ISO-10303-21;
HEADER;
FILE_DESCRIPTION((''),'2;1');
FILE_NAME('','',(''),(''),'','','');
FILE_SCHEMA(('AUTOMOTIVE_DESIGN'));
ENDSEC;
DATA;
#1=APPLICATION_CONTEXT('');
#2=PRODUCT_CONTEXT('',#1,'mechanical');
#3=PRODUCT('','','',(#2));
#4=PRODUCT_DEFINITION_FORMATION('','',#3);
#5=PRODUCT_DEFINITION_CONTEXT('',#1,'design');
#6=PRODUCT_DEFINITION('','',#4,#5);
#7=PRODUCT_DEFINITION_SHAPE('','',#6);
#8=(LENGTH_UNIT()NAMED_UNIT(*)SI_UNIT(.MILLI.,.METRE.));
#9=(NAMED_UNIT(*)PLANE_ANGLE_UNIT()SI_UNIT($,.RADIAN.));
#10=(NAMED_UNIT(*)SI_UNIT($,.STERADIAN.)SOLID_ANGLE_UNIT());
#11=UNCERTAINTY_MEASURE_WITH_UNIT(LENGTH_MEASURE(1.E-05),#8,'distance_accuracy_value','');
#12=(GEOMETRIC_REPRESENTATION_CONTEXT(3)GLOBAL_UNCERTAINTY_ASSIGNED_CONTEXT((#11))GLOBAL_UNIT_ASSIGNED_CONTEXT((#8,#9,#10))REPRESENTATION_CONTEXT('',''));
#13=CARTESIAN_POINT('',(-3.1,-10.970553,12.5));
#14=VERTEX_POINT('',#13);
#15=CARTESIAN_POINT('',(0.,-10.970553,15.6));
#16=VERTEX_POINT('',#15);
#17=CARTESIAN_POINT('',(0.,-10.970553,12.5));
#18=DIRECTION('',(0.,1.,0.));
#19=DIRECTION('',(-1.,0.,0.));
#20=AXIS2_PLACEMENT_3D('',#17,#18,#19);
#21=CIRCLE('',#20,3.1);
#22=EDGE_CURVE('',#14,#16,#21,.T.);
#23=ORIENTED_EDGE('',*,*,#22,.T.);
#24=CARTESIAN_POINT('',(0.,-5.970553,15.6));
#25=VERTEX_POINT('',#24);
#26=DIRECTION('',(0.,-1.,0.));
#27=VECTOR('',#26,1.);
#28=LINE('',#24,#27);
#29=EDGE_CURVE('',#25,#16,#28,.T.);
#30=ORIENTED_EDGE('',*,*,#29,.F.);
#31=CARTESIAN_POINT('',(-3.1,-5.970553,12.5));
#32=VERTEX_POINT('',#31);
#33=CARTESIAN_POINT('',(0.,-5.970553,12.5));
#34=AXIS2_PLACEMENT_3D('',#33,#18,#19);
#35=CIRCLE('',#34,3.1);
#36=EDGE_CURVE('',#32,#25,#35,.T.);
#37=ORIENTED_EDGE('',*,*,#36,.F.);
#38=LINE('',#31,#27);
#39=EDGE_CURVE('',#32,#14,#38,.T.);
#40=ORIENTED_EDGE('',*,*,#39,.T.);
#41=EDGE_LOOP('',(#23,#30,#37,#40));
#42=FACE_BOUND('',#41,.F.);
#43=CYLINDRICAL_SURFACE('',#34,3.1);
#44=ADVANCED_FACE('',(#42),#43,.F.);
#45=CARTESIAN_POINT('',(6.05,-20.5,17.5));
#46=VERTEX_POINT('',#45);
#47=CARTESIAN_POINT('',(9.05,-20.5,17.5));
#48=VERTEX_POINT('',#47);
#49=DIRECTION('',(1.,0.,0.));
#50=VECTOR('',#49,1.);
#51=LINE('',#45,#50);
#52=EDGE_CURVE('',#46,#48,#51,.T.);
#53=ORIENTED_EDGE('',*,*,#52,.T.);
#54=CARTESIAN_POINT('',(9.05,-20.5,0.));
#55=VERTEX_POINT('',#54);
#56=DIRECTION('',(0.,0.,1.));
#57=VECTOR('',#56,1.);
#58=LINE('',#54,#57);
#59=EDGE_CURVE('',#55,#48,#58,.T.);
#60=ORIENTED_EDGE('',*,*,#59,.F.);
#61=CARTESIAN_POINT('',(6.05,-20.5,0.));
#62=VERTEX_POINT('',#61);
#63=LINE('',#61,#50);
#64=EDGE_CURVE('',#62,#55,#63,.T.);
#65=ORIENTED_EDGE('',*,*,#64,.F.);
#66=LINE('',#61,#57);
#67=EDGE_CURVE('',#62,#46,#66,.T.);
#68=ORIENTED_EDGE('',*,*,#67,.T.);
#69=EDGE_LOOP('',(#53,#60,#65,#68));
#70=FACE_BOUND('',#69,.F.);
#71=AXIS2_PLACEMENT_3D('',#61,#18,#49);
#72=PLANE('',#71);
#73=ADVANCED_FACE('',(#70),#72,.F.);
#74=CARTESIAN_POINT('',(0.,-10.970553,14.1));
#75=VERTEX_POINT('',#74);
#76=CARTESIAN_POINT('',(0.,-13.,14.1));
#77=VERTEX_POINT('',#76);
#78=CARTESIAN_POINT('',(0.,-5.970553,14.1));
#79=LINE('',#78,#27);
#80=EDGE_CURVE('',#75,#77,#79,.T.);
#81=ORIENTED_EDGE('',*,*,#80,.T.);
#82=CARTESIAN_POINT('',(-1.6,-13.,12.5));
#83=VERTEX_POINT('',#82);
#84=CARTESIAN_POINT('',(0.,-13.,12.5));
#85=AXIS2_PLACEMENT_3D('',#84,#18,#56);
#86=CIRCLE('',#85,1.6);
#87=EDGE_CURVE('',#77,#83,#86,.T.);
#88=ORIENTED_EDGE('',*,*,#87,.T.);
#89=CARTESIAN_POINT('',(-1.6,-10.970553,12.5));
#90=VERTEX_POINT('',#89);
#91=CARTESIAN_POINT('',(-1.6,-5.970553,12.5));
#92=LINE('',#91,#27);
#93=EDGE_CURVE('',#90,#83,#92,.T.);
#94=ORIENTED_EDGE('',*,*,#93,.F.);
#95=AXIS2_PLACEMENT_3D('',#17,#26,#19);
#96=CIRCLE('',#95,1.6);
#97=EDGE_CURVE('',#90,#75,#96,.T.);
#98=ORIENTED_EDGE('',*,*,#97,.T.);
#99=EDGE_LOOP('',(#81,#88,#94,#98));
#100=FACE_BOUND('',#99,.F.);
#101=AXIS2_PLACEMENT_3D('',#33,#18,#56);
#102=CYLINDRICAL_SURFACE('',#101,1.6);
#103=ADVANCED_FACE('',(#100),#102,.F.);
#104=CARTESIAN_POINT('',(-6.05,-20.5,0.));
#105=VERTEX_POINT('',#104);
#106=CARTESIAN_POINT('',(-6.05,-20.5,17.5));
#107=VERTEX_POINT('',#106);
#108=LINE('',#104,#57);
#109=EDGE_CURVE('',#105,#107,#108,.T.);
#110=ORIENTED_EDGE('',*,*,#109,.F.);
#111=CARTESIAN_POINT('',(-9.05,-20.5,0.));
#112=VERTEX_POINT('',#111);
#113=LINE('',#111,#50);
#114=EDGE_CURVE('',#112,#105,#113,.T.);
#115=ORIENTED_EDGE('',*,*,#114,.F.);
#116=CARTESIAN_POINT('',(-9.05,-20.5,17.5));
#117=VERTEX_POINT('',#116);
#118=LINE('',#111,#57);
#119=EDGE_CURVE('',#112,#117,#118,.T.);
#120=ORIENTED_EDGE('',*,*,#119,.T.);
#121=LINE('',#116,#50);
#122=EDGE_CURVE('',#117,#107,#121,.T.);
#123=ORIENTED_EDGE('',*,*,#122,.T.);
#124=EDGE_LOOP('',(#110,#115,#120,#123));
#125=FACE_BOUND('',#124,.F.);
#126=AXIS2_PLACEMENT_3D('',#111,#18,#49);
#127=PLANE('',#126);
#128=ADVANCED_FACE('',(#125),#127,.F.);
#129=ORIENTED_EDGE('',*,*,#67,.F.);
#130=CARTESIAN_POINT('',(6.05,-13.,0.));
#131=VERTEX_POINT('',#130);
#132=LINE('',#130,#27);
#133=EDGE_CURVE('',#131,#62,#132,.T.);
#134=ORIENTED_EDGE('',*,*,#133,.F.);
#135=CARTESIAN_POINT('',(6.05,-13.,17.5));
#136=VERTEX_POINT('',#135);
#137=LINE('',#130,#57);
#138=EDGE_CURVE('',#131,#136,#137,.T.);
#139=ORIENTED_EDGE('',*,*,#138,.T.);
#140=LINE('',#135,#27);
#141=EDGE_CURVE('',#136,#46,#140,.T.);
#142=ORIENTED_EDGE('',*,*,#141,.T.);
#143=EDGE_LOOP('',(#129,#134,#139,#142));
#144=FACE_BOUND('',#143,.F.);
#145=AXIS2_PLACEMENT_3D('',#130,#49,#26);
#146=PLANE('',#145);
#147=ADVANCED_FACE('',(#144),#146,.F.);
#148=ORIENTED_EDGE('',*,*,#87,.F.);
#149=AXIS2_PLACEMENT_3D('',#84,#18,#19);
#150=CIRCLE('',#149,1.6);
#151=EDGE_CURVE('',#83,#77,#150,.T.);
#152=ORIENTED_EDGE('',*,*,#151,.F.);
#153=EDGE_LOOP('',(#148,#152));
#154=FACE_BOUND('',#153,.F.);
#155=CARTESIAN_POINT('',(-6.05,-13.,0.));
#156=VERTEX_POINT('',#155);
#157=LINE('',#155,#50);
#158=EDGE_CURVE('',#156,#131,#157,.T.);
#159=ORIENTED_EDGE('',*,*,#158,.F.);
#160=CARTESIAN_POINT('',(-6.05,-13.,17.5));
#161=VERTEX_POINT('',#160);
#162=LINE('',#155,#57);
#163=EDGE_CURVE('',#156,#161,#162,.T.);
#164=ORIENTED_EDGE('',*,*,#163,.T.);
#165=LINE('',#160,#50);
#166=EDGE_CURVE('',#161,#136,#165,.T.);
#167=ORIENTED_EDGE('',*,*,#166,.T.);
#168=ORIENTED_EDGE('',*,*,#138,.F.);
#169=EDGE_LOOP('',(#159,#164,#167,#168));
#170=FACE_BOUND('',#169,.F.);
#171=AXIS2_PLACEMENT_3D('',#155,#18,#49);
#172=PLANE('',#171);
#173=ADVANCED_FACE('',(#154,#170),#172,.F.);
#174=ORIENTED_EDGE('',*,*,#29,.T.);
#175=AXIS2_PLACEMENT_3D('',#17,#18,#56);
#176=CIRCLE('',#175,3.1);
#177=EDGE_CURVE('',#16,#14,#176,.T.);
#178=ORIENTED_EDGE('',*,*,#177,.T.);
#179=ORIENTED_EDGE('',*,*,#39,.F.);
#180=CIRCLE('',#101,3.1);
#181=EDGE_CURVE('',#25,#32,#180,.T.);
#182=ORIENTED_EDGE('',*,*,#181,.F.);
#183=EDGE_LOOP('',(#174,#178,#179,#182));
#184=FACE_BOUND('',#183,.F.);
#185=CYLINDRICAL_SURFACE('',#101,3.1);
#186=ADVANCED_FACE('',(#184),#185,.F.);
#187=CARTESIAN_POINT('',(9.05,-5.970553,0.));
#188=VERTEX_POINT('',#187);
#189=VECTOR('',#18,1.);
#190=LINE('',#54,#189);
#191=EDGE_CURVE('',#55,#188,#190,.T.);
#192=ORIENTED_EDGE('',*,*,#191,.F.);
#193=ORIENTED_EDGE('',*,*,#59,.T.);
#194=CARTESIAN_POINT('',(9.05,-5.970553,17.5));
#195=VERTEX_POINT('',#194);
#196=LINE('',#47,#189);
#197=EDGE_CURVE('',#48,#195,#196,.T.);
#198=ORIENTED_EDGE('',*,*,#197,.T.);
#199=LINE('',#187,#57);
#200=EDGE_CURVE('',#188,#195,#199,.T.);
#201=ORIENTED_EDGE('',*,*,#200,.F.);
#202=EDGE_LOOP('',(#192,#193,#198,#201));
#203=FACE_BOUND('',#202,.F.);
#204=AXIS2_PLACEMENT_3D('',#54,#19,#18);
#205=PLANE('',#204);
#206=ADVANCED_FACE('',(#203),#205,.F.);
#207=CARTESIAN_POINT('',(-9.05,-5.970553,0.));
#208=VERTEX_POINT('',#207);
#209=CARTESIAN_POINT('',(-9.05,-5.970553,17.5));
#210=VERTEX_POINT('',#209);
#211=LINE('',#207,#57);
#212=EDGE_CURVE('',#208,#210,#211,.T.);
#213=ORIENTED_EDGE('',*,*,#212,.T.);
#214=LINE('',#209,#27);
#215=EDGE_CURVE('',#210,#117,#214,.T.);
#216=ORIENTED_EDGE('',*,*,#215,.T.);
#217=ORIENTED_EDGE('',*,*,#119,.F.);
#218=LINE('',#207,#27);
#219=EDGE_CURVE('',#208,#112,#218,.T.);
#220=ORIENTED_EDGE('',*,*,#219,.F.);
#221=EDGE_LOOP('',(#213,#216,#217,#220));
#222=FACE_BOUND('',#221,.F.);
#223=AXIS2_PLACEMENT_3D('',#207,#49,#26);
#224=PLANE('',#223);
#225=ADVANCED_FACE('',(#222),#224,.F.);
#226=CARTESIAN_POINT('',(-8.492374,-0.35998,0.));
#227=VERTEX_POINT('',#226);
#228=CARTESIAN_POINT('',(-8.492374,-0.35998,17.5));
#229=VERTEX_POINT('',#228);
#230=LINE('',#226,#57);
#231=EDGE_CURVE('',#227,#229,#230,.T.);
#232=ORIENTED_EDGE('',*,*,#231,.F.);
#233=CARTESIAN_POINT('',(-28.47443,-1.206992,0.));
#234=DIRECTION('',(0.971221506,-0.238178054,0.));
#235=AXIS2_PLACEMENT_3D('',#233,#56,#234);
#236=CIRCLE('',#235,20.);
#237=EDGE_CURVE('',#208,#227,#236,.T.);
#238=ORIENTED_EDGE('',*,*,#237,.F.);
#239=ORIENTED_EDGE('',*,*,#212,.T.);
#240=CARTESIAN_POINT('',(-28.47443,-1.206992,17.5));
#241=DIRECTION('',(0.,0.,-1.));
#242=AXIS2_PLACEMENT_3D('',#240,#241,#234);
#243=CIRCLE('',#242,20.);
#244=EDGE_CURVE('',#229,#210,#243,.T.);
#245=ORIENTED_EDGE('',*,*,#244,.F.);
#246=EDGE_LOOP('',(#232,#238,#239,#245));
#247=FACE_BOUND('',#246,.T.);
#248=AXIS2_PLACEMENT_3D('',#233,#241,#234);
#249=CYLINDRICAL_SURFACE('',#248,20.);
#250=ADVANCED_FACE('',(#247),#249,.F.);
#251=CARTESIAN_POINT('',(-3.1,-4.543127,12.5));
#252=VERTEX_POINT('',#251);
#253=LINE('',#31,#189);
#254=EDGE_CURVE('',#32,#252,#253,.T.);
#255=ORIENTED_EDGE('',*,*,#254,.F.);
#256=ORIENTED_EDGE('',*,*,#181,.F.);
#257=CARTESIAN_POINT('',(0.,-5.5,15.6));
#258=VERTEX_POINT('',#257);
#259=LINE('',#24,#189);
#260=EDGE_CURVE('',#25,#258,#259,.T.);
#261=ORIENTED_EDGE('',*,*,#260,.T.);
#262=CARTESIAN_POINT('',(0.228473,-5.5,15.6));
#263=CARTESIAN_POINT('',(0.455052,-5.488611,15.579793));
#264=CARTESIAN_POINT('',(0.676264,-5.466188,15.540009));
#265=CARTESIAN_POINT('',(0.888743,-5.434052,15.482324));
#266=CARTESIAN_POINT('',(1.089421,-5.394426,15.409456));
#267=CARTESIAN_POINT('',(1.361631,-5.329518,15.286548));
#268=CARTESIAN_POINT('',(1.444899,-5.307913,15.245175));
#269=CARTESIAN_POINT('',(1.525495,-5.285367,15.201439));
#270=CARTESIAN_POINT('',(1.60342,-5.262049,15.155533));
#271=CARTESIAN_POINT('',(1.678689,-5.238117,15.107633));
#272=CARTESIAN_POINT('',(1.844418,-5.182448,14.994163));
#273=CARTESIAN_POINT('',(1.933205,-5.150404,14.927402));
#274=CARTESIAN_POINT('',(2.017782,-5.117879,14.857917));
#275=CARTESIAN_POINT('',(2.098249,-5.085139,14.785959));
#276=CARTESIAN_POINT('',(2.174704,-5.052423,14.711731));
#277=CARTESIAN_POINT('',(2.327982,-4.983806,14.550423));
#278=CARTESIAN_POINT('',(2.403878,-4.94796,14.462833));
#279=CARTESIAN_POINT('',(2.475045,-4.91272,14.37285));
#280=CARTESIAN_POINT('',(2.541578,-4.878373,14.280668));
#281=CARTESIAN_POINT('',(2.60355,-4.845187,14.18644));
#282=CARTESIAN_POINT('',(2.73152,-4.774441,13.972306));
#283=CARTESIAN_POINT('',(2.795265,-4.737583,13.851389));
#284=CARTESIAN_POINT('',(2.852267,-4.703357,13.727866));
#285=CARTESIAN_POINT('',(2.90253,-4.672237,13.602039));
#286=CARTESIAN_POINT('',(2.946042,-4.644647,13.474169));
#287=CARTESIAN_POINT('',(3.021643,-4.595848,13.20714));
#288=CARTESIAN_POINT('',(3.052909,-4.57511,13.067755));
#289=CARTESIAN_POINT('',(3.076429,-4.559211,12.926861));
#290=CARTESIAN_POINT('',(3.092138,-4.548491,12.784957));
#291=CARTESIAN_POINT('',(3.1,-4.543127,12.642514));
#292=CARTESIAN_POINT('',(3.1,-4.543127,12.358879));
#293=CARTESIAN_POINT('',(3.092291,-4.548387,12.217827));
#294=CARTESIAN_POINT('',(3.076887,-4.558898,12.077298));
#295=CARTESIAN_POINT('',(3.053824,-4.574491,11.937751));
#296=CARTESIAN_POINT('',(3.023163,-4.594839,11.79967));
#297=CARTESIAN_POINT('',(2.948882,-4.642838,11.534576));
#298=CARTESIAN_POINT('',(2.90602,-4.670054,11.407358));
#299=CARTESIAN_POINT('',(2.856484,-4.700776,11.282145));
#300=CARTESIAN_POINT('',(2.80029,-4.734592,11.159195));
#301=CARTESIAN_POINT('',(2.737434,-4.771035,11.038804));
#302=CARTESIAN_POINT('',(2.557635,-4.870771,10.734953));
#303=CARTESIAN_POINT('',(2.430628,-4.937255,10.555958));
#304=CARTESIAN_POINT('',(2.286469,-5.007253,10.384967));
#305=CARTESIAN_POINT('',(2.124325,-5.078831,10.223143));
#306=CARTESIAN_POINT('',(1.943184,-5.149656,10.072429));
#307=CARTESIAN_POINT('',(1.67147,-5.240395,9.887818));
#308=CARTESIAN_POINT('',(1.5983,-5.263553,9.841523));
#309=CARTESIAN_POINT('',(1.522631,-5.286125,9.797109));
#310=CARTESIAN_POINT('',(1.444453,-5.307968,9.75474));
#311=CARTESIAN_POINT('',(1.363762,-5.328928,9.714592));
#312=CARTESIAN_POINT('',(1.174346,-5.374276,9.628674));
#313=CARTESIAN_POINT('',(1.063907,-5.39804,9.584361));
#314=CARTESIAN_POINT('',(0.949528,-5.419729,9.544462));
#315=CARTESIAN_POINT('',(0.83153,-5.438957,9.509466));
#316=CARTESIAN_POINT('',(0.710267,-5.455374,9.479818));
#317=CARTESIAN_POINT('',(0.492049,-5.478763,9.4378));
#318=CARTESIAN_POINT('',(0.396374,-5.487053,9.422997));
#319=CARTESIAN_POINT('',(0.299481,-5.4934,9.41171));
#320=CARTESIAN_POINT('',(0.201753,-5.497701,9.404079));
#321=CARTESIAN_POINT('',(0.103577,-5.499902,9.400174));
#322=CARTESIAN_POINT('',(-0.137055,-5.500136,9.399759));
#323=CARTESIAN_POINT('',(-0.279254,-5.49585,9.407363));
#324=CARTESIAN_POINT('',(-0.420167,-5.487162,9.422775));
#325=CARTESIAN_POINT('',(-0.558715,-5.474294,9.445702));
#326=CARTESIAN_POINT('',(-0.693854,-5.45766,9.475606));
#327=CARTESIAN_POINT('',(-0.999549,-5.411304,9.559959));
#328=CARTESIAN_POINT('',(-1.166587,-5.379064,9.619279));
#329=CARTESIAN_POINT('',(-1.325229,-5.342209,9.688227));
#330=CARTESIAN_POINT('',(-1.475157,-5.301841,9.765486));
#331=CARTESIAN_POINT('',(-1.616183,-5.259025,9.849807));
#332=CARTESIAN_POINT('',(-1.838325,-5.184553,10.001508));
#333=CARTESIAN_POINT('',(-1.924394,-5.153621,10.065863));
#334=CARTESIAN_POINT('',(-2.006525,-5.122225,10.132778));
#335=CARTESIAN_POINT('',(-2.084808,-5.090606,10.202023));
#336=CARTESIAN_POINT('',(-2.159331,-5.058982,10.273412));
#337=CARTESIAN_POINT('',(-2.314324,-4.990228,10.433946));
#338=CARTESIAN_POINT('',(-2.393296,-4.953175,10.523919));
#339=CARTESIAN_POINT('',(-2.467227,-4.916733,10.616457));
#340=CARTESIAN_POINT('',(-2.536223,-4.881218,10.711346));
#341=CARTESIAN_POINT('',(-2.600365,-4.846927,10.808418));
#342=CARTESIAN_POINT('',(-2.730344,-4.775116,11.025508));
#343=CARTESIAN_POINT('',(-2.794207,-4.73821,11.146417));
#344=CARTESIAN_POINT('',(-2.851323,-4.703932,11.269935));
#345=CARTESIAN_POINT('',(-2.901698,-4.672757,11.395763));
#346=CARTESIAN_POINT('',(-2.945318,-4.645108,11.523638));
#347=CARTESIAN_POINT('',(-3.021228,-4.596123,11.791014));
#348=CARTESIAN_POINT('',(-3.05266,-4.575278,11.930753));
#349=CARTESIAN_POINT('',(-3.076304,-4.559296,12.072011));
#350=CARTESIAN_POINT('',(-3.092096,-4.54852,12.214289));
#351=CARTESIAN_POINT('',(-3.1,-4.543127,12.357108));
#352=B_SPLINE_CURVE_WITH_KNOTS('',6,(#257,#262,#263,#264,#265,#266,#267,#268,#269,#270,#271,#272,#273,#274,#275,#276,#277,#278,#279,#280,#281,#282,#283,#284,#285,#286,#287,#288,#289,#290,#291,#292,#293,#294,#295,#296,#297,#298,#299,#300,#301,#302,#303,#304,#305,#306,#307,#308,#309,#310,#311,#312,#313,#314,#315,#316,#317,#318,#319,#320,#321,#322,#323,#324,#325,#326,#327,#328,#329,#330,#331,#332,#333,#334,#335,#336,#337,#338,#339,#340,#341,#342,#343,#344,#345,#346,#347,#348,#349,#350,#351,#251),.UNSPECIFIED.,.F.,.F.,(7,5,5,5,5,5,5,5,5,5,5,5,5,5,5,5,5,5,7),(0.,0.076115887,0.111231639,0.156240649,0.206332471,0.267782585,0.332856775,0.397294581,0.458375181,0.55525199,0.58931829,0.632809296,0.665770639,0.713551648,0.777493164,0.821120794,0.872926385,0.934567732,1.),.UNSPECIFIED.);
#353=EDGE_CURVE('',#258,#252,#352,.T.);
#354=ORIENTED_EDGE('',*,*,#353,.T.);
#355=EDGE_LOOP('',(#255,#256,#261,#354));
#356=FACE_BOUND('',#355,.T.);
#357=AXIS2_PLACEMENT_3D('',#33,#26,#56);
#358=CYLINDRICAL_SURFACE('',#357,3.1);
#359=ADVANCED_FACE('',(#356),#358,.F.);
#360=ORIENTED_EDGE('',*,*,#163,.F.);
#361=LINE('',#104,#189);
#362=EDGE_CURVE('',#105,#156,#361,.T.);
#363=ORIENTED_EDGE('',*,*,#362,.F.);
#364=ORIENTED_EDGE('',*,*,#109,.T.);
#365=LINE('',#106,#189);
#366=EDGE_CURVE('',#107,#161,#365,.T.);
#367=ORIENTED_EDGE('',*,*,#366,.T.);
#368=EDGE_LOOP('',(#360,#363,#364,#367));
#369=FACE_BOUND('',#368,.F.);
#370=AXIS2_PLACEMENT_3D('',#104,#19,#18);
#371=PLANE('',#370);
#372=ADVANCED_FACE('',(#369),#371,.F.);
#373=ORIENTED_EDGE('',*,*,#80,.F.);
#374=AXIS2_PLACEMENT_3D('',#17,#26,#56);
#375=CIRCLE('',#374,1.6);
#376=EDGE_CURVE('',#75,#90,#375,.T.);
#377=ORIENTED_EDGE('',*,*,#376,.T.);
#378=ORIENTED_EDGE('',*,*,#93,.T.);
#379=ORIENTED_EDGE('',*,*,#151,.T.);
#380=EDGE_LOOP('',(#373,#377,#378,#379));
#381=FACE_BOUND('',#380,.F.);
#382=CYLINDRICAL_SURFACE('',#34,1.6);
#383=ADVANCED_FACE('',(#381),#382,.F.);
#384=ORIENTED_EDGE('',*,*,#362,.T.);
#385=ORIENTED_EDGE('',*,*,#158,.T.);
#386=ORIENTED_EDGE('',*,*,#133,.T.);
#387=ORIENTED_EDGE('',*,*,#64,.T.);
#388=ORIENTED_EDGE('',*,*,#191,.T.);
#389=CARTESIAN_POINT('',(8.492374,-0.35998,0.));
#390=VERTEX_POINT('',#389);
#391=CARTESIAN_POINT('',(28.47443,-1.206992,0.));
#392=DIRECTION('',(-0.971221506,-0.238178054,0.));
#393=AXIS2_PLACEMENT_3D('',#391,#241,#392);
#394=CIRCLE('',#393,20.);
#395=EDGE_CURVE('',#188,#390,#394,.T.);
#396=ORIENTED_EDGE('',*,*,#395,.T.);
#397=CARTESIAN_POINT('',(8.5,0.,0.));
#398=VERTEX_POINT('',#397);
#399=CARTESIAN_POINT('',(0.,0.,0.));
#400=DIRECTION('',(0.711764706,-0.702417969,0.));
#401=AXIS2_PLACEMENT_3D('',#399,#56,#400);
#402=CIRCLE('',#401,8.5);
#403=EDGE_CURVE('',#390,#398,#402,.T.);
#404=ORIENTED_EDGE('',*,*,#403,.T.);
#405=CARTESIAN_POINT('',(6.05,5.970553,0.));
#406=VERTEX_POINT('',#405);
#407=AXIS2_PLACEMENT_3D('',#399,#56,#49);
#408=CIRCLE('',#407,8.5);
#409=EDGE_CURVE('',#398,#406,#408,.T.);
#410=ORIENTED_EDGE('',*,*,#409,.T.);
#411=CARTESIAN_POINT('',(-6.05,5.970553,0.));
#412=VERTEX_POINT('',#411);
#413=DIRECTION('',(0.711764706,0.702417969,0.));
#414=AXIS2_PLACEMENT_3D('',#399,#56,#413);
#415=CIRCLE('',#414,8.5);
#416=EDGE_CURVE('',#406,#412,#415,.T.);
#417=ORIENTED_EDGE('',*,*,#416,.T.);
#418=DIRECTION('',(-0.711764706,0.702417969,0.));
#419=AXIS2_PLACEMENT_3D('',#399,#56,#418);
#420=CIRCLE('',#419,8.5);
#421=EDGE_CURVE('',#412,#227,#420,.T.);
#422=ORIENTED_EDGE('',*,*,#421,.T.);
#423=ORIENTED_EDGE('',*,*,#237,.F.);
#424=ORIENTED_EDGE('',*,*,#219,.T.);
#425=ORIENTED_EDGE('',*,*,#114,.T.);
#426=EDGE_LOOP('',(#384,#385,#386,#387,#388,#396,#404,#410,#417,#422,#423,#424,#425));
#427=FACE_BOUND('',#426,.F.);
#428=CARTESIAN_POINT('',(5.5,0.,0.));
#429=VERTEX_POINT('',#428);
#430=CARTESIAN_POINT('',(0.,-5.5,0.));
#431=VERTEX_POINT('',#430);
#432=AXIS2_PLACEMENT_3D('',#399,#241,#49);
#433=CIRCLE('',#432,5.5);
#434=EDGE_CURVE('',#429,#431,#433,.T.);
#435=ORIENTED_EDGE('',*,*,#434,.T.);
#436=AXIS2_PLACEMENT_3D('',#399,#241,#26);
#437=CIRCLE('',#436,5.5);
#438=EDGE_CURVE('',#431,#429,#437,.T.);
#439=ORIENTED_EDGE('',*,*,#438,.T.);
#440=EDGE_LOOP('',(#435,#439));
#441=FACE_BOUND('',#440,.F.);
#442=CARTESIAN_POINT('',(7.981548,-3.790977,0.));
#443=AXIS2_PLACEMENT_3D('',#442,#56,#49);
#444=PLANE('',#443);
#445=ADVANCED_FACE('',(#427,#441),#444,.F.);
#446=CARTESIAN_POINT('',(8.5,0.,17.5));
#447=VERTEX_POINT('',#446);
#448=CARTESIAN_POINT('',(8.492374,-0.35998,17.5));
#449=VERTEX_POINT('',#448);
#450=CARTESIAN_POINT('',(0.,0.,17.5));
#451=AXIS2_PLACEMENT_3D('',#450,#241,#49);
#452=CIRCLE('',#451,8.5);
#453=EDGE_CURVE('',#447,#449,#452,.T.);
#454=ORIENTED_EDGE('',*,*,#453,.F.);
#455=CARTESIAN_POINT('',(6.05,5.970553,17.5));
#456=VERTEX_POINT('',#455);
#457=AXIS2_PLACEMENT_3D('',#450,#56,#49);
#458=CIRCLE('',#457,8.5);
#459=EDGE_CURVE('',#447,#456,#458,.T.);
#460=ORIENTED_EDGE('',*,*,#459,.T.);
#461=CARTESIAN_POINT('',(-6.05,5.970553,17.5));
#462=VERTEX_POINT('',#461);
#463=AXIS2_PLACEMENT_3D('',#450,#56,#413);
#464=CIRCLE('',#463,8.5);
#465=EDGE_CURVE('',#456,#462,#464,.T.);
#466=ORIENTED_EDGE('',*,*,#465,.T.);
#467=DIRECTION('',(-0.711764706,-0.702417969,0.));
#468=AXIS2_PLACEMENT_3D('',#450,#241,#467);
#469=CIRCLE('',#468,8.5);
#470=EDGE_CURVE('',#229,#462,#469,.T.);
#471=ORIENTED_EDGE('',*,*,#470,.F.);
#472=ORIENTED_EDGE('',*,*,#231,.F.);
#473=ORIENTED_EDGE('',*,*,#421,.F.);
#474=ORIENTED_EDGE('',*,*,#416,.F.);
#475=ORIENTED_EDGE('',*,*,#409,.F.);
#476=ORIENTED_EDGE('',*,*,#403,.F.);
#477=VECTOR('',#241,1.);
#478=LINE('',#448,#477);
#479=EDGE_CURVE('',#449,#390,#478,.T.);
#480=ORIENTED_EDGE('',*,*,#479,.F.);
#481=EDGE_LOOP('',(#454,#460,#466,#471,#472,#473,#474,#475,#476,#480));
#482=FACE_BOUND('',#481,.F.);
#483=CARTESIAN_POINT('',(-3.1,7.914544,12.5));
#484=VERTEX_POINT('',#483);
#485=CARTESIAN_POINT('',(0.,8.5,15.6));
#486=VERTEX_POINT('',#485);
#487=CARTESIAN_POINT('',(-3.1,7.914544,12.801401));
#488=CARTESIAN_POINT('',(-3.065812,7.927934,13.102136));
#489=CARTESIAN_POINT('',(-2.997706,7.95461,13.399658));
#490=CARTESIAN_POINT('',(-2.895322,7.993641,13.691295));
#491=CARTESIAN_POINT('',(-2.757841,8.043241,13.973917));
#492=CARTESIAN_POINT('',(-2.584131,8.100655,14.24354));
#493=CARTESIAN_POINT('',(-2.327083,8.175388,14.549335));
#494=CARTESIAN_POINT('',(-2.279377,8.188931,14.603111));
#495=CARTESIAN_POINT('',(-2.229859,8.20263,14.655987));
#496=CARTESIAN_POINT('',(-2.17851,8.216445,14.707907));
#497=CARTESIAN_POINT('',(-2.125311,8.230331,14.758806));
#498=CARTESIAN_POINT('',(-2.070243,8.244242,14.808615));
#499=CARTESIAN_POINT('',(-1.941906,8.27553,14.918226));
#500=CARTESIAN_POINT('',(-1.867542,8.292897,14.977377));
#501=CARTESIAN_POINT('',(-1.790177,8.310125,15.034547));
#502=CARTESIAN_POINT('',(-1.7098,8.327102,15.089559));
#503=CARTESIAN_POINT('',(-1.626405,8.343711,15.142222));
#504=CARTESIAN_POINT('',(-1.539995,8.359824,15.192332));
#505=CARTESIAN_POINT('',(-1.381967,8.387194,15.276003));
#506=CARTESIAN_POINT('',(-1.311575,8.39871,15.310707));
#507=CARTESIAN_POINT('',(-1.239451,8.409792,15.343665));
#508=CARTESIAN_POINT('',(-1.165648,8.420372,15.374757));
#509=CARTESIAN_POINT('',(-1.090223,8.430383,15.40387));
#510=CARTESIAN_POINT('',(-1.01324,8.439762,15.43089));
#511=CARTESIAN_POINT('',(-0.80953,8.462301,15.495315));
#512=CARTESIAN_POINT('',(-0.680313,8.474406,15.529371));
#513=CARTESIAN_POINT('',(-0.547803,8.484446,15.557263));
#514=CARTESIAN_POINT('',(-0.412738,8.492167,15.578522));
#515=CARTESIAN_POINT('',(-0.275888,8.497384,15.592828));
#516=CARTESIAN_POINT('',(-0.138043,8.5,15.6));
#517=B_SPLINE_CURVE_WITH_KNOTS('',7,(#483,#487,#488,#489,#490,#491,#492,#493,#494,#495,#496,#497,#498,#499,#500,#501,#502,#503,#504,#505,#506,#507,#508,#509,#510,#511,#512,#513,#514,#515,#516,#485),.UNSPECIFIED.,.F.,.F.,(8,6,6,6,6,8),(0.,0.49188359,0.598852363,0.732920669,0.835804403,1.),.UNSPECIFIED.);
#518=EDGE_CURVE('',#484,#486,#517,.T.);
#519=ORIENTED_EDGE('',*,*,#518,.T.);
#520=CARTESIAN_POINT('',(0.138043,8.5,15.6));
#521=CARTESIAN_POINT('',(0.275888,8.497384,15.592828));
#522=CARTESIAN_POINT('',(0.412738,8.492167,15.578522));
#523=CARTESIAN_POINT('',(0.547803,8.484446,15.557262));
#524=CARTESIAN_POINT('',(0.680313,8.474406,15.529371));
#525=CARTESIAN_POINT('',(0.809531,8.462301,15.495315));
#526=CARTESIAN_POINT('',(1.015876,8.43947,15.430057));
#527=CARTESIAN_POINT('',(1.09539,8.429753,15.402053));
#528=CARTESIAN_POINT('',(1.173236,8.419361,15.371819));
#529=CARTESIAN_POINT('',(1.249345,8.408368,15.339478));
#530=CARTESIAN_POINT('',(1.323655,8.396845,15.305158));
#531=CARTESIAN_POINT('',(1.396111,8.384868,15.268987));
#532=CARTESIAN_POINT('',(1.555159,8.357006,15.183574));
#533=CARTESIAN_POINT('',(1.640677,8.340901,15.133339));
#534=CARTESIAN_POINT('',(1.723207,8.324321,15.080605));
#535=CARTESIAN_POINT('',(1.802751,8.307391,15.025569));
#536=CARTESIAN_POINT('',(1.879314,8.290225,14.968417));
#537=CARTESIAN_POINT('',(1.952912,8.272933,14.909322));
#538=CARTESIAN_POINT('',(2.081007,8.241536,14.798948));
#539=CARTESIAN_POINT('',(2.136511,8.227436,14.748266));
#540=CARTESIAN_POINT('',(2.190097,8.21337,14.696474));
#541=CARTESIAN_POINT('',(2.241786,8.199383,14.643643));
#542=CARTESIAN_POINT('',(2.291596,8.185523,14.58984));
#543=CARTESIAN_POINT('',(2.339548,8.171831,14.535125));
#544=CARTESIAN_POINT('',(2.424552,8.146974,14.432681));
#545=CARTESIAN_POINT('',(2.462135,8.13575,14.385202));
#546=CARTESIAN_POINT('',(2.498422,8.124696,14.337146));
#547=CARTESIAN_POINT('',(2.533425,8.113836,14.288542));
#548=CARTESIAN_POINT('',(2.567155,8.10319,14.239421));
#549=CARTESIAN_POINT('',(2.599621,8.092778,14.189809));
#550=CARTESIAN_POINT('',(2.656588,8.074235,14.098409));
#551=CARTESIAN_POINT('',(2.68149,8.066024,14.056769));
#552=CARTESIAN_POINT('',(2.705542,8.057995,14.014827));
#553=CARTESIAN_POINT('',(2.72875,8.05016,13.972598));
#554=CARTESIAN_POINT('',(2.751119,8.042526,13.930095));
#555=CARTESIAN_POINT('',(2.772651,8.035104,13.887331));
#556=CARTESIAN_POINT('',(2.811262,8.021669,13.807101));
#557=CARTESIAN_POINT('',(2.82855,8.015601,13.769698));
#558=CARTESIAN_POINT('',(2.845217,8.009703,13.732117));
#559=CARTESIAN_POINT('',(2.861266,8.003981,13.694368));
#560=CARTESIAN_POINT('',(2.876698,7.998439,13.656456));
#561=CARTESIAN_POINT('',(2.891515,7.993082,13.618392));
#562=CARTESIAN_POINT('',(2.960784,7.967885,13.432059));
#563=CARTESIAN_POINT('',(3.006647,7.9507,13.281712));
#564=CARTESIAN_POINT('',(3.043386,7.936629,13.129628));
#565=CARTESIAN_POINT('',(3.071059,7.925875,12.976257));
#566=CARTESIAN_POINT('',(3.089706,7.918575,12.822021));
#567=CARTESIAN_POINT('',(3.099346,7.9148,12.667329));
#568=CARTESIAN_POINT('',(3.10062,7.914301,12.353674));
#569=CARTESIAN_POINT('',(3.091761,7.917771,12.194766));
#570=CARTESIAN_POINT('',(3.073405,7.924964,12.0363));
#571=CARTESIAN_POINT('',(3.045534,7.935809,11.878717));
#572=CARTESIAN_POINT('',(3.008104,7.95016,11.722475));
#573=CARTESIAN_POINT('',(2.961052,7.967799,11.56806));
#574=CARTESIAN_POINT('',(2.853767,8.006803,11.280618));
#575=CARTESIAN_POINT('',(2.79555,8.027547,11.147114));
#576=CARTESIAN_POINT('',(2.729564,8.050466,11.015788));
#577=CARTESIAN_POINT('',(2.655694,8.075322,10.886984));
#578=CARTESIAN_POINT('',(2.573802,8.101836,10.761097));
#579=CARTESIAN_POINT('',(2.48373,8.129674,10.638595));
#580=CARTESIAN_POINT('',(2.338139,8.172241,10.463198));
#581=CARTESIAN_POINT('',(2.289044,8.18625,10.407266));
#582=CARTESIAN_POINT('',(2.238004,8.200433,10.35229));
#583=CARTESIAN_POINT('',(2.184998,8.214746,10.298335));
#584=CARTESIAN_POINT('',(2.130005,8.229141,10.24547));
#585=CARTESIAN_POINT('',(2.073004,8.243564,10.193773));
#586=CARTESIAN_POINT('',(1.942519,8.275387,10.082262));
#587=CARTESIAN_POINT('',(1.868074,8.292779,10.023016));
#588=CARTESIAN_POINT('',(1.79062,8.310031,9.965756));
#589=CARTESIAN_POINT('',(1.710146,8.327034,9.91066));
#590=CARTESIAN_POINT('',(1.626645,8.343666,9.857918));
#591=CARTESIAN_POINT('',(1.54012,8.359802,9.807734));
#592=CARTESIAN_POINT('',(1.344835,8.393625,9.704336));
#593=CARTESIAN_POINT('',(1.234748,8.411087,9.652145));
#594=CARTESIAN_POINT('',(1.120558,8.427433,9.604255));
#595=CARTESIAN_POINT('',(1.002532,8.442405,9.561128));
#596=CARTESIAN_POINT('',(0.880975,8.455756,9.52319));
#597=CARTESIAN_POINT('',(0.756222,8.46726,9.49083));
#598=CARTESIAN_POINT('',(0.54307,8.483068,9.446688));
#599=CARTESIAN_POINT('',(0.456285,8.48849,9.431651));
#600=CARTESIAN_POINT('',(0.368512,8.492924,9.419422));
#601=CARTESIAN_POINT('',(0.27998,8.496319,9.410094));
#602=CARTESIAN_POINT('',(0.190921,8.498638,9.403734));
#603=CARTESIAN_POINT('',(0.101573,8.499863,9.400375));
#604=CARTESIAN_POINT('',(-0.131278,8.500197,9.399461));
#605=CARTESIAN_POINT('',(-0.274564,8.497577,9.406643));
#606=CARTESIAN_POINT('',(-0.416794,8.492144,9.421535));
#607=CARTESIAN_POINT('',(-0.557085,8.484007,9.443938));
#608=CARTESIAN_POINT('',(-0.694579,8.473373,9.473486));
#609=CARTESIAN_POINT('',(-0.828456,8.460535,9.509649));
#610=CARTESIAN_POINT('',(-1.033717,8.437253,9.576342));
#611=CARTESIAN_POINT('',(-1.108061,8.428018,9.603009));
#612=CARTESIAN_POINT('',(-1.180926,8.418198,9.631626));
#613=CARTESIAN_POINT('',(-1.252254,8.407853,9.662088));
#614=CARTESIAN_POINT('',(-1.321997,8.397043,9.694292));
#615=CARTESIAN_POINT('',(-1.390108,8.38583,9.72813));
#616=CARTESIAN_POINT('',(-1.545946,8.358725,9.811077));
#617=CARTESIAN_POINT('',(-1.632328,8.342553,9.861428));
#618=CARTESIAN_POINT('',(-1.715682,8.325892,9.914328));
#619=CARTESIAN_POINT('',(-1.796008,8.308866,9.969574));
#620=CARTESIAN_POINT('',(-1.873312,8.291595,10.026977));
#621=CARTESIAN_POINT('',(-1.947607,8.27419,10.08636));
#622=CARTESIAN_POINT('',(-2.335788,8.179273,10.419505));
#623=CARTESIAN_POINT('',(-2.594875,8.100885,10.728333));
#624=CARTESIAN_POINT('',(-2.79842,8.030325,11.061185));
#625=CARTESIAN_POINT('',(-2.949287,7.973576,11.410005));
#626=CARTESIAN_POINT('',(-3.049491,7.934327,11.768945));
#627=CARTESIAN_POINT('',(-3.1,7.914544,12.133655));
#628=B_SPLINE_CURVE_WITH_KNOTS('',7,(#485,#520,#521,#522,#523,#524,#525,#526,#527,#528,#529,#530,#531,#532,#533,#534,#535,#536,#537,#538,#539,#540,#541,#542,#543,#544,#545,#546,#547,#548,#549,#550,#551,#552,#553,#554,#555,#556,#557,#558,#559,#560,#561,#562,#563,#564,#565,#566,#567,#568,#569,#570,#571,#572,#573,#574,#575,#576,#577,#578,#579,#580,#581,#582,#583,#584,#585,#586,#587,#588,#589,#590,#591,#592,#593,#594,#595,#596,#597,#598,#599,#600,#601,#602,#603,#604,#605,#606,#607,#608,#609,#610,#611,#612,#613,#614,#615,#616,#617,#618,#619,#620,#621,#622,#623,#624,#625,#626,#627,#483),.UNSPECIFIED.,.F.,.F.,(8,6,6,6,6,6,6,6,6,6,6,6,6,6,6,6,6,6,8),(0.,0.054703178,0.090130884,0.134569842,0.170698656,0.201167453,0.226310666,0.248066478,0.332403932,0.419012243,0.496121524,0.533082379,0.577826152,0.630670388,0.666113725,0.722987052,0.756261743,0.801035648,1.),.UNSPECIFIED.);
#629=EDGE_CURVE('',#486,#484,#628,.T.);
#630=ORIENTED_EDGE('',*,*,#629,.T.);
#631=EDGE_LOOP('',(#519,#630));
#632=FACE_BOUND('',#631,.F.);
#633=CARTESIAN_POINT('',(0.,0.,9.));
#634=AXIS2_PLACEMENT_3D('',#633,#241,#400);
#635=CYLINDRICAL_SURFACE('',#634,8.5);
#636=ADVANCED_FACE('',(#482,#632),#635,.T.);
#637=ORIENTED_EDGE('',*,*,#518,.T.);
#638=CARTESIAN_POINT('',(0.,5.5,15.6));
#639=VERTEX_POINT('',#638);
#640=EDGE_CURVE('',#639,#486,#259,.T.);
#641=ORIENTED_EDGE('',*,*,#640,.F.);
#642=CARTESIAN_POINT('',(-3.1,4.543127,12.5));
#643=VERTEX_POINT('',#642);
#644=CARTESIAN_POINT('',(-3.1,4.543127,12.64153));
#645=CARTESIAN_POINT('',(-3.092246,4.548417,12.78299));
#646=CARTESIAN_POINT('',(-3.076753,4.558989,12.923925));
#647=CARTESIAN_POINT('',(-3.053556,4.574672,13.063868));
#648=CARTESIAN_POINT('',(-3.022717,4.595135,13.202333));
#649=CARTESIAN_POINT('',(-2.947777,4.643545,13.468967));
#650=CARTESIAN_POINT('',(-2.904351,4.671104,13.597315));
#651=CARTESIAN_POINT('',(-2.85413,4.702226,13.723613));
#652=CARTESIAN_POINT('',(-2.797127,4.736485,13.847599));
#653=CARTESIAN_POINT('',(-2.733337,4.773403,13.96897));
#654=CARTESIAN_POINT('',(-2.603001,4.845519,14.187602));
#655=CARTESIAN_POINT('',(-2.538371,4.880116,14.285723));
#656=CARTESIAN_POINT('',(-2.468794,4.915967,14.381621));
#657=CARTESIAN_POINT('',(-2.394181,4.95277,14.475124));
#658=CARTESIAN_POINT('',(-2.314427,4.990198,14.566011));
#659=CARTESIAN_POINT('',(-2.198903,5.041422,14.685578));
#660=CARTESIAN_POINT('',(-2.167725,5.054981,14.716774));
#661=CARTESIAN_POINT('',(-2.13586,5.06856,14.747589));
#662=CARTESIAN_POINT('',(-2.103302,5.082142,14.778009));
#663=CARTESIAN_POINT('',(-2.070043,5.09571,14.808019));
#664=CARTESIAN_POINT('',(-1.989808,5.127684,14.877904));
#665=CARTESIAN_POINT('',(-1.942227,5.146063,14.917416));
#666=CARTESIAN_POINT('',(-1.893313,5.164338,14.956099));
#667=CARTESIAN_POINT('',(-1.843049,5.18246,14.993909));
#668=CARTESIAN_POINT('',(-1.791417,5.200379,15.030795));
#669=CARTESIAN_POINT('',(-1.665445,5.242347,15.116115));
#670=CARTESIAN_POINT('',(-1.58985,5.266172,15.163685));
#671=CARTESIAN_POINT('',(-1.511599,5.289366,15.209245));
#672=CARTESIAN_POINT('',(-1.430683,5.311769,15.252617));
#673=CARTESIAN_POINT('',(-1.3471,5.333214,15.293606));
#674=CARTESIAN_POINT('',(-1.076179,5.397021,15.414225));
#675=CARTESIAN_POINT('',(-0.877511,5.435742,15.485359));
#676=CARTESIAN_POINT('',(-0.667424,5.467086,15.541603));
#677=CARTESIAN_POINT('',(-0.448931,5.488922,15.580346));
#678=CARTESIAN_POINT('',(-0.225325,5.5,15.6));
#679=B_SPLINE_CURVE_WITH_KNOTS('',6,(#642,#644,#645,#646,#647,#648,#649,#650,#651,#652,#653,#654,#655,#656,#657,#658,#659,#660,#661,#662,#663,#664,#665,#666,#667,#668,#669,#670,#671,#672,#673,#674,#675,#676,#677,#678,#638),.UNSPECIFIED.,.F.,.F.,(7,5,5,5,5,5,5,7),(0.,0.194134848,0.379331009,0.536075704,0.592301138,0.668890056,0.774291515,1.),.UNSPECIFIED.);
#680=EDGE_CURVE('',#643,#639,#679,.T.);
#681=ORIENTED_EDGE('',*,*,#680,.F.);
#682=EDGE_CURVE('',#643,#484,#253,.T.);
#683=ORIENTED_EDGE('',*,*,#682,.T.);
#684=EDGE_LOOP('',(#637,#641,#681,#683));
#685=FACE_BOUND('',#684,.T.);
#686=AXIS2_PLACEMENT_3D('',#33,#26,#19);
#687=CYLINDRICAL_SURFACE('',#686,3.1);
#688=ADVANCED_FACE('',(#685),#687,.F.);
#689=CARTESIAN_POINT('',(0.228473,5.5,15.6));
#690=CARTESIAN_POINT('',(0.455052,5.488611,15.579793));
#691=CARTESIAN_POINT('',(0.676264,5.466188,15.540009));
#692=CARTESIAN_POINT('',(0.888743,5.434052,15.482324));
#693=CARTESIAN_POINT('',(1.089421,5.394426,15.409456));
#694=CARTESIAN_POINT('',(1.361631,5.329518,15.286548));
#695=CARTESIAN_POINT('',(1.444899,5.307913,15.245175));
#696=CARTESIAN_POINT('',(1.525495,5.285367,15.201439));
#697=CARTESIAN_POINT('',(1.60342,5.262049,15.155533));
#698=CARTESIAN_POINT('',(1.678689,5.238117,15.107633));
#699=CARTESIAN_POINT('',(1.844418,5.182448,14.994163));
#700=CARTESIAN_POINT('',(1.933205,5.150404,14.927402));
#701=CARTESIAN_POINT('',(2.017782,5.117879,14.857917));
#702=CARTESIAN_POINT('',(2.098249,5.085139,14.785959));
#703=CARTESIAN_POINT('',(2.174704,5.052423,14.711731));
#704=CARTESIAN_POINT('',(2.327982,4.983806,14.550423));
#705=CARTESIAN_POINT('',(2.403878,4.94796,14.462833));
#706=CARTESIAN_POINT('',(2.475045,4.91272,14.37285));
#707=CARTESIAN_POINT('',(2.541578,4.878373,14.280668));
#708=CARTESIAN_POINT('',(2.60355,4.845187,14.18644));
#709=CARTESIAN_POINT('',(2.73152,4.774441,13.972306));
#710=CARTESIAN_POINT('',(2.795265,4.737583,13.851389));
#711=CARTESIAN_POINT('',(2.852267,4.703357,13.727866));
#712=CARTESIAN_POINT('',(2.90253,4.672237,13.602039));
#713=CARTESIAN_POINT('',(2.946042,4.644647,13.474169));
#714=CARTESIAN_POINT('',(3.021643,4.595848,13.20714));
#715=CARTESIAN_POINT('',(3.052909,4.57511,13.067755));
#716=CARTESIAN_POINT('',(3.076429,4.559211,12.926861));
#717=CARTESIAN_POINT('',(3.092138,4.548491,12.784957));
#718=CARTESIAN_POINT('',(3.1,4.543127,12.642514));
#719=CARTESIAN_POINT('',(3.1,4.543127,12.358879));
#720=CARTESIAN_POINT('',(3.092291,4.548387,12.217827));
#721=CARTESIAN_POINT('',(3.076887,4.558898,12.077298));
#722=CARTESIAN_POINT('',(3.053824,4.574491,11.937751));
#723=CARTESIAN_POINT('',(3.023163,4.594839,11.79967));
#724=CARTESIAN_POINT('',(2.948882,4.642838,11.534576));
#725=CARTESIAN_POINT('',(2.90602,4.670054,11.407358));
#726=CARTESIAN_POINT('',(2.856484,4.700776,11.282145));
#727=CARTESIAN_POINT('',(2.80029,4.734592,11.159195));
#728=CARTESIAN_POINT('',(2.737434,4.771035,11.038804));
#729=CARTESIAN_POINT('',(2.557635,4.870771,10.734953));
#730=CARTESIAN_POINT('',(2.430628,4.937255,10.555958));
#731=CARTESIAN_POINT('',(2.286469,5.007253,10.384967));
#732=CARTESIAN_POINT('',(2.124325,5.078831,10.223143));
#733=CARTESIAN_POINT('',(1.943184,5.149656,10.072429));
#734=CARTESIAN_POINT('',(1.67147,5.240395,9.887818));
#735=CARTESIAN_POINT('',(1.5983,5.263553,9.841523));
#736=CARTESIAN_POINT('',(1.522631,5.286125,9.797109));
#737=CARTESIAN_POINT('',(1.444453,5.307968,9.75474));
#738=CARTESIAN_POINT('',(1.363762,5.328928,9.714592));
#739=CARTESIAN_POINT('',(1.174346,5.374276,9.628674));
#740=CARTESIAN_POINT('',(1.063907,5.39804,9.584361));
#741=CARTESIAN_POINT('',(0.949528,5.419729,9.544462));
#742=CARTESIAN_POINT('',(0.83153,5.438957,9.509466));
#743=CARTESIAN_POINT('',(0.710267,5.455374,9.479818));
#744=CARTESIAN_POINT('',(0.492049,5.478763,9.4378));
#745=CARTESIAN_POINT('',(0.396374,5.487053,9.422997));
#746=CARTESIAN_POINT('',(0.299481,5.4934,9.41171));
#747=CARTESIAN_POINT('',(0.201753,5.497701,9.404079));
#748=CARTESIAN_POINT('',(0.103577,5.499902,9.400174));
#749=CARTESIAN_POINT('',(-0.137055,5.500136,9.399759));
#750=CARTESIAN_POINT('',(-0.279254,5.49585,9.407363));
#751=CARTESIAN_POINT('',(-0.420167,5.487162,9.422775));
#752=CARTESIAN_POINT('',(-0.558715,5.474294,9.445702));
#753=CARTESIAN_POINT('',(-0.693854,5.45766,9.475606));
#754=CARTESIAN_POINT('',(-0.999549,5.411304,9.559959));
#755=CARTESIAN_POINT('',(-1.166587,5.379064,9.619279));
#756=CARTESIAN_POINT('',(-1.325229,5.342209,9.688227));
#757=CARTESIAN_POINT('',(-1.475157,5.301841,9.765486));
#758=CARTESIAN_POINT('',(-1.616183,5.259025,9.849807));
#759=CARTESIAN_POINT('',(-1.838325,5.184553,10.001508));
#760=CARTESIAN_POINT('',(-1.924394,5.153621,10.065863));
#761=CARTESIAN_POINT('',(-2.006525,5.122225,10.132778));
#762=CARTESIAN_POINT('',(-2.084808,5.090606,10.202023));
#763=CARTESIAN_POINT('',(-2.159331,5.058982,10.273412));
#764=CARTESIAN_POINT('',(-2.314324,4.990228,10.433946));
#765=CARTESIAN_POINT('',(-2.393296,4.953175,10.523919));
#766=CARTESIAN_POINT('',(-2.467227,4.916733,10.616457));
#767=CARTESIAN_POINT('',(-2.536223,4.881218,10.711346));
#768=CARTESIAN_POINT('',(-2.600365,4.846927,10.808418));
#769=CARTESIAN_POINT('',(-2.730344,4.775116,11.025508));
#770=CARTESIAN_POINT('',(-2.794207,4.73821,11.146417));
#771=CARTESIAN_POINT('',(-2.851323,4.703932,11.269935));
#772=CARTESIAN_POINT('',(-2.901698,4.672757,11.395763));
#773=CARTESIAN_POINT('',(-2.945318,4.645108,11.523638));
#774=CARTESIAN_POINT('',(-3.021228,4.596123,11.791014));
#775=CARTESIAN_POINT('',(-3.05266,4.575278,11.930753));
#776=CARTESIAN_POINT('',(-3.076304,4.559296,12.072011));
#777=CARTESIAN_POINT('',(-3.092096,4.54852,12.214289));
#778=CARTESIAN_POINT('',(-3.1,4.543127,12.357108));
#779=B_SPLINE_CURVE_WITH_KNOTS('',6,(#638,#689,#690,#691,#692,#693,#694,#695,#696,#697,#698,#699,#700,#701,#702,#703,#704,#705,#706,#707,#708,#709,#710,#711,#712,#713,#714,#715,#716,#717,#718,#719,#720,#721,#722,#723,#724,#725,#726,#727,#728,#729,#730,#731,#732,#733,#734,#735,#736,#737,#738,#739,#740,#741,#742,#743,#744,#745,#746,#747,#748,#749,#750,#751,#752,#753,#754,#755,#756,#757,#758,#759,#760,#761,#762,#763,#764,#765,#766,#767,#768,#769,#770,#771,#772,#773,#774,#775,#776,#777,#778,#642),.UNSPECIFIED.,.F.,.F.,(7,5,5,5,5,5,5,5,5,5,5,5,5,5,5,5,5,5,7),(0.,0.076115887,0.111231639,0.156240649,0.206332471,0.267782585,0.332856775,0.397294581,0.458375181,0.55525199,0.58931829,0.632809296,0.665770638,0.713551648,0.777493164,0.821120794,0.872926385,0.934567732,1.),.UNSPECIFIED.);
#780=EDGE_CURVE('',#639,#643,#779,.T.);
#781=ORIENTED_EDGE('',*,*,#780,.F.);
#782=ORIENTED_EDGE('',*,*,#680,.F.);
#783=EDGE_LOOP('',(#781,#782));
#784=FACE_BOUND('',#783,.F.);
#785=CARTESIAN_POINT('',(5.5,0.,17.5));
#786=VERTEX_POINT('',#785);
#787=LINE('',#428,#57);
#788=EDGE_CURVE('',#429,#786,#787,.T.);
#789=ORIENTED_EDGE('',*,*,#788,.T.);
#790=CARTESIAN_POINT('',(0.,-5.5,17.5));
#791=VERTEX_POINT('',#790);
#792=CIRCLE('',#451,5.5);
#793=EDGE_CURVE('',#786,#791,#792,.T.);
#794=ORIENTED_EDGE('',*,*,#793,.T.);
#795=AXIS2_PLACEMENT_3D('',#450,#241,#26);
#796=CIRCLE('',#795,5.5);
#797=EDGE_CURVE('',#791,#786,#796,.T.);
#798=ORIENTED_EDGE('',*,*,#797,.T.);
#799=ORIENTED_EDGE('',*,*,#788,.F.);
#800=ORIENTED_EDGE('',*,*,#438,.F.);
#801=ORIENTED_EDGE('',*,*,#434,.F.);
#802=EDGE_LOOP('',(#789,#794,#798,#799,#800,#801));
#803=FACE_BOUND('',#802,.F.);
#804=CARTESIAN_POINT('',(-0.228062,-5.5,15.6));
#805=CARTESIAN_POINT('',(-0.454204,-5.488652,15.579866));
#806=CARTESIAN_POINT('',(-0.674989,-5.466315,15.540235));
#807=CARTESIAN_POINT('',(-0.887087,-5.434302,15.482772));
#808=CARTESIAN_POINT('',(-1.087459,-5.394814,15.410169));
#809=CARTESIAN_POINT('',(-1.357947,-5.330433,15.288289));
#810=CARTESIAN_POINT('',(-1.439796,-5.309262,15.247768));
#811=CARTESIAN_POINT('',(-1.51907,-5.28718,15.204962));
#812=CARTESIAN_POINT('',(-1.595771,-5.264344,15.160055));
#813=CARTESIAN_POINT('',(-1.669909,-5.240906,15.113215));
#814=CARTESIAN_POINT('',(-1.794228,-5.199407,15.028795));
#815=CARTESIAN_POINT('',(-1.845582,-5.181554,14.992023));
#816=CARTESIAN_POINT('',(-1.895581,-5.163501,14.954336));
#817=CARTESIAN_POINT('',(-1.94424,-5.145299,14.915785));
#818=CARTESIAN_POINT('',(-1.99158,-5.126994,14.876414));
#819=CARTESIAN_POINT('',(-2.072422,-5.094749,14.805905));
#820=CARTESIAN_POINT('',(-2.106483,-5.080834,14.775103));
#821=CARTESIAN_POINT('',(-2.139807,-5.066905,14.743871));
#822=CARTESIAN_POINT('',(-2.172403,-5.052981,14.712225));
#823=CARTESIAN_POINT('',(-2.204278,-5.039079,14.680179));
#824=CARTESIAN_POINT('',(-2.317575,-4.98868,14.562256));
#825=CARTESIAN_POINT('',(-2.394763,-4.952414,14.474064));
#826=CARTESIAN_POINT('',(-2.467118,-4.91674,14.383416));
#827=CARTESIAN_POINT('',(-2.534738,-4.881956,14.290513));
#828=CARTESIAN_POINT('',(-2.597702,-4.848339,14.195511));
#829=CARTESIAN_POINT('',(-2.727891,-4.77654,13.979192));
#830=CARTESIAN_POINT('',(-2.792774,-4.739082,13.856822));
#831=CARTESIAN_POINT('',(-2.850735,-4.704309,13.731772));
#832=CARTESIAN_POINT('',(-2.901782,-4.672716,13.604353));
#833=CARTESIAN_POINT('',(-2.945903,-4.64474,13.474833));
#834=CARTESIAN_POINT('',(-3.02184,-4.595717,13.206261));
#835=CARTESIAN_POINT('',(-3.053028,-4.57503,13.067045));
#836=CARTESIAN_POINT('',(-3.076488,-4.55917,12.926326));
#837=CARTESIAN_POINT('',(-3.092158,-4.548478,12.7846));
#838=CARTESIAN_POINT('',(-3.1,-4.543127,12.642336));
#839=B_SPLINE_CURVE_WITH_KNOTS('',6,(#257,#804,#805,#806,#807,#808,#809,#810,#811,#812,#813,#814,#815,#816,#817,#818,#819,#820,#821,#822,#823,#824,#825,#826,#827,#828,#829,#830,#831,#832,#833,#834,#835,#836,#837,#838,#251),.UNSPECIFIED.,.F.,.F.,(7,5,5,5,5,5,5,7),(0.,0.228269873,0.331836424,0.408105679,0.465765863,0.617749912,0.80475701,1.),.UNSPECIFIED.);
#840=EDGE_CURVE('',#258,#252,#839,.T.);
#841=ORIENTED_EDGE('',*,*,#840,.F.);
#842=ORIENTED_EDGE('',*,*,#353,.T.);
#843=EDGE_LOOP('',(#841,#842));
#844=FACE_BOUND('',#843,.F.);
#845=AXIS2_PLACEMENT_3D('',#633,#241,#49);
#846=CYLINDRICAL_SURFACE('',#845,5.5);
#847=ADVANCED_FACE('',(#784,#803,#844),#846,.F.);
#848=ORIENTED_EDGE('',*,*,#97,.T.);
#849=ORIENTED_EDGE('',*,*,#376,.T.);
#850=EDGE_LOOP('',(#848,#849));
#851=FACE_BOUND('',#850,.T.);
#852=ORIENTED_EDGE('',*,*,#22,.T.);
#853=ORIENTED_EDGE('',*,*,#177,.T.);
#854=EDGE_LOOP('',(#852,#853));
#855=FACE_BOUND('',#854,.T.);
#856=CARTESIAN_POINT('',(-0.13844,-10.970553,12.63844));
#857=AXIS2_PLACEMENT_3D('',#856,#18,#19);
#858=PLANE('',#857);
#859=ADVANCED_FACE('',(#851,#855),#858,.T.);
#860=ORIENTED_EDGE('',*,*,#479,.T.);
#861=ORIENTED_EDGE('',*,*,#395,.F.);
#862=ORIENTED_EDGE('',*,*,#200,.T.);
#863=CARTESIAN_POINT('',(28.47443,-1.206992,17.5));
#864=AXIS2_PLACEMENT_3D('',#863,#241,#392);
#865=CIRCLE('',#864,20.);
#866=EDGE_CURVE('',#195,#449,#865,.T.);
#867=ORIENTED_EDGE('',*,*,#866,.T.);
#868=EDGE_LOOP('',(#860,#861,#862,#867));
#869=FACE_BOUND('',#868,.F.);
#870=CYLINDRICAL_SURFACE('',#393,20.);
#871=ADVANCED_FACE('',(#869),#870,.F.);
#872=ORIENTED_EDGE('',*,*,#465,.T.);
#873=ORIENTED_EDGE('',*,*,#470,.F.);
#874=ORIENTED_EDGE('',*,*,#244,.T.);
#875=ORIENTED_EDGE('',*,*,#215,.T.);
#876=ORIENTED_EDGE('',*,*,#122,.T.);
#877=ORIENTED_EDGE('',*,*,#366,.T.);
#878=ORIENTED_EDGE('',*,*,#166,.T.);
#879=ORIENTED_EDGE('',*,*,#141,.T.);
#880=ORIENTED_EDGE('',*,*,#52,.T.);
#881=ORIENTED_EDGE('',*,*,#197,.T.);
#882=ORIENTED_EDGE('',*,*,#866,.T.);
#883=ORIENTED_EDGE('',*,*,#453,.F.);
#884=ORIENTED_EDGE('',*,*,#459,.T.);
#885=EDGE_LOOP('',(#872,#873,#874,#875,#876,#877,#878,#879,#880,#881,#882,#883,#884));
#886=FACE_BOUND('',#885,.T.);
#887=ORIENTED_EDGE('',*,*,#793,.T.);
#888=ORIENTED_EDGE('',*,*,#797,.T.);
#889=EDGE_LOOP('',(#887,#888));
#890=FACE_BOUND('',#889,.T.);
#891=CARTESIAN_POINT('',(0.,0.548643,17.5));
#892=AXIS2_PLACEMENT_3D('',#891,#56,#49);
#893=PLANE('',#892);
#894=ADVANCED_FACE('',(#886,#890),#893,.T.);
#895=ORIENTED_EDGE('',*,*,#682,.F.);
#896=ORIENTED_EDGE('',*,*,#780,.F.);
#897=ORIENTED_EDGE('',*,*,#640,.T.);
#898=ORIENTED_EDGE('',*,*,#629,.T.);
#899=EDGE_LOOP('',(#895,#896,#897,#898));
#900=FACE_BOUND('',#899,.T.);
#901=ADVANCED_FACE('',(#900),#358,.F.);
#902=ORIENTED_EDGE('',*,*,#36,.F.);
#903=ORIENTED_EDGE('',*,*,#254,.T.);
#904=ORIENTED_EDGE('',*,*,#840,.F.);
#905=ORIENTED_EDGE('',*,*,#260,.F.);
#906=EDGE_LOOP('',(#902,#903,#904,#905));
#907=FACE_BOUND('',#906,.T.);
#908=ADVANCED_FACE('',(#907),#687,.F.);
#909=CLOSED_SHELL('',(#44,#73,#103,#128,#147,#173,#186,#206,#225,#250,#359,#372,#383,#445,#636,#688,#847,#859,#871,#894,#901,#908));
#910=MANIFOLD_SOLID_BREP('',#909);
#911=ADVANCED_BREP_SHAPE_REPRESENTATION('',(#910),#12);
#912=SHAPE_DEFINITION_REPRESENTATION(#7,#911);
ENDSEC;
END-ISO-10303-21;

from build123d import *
from build123d import SkipClean  # not in build123d's __all__

# Parameters (mm, degrees)
F1_DEPTH    = 17.5
F2_DEPTH    = 9
F3_T4_DEPTH = 24.2978178738
F3_T9_DEPTH = 24.2978178738
F5_DEPTH    = 8.5
F6_DEPTH    = 25
F7_DEPTH    = 5
F8_DEPTH    = 25


# Not quite as in the source:
# - a fillet or chamfer that OpenCascade refuses, or shapes differently, is made with other operations: its cross-section is extruded or revolved along the edge and cut away or added
# - after a boolean that leaves OpenCascade's solid faulty, fix() repairs it
# - a feature names something its author has since deleted; it is built from what else it names


with BuildPart() as f1:
    # F0 (on Top) → F1 (new body)
    with BuildSketch(Plane.XY):
        Polygon((-6.05, -13), (-6.05, -5.9705527382), (-9.05, -5.9705527382), (-9.05, -20.5), (-6.05, -20.5), align=None)
        with BuildLine():
            Line((0, -13), (0, -8.5))
            ThreePointArc((0, -8.5), (-3.2787422684, -7.842183952), (-6.05, -5.9705527382))
            Line((-6.05, -5.9705527382), (-6.05, -13))
            Line((-6.05, -13), (0, -13))
        make_face()
        with BuildLine():
            ThreePointArc((6.05, -5.9705527382), (3.2787422684, -7.842183952), (0, -8.5))
            Line((0, -8.5), (0, -13))
            Line((0, -13), (6.05, -13))
            Line((6.05, -13), (6.05, -5.9705527382))
        make_face()
        Polygon((9.05, -5.9705527382), (6.05, -5.9705527382), (6.05, -13), (6.05, -20.5), (9.05, -20.5), align=None)
    extrude(amount=F1_DEPTH)

    # F0 (on Top) → F2 (join)
    with BuildSketch(Plane.XY):
        with BuildLine():
            Line((-6.05, -5.9705527382), (0, -5.9705527382))
            Line((0, -5.9705527382), (6.05, -5.9705527382))
            Line((6.05, -5.9705527382), (6.05, 5.9705527382))
            ThreePointArc((6.05, 5.9705527382), (0, 8.5), (-6.05, 5.9705527382))
            Line((-6.05, 5.9705527382), (-6.05, -5.9705527382))
        make_face()
        with BuildLine():
            ThreePointArc((0, -5.5), (-3.8890872965, 3.8890872965), (5.5, 0))
            ThreePointArc((5.5, 0), (3.8890872965, -3.8890872965), (0, -5.5))
        make_face(mode=Mode.SUBTRACT)
        with BuildLine():
            Line((6.05, 5.9705527382), (6.05, -5.9705527382))
            ThreePointArc((6.05, -5.9705527382), (7.8636823435, -3.2268405601), (8.5, 0))
            ThreePointArc((8.5, 0), (7.8636823435, 3.2268405601), (6.05, 5.9705527382))
        make_face()
        with BuildLine():
            ThreePointArc((-6.05, 5.9705527382), (-8.5, 0), (-6.05, -5.9705527382))
            Line((-6.05, -5.9705527382), (-6.05, 5.9705527382))
        make_face()
        with BuildLine():
            Line((0, -8.5), (0, -5.9705527382))
            Line((0, -5.9705527382), (-6.05, -5.9705527382))
            ThreePointArc((-6.05, -5.9705527382), (-3.2787422684, -7.842183952), (0, -8.5))
        make_face()
        with BuildLine():
            Line((6.05, -5.9705527382), (0, -5.9705527382))
            Line((0, -5.9705527382), (0, -8.5))
            ThreePointArc((0, -8.5), (3.2787422684, -7.842183952), (6.05, -5.9705527382))
        make_face()
    extrude(amount=F2_DEPTH)

    # F3: fillet of radius 20 on 4 edges, made by hand


with BuildPart() as f3_tool2:
    # F3_s3 → F3_t4 (new body)
    with BuildSketch(Plane.XY):
        with BuildLine():
            ThreePointArc((-9.05, -5.9705527382), (-8.5724849096, -3.1850150396), (-8.492373898, -0.3599799676))
            ThreePointArc((-8.492373898, -0.3599799676), (-7.7935737214, -3.3926698409), (-6.05, -5.9705527382))
            Line((-6.05, -5.9705527382), (-9.05, -5.9705527382))
        make_face()
    extrude(amount=F3_T4_DEPTH)

    split(bisect_by=Plane.XY.offset(17.5), keep=Keep.BOTTOM)


with BuildPart() as f1_1:
    add(f1.part, clean=False)

    # F3_t1: union F3_tool2
    add(f3_tool2.part)


with BuildPart() as f3_tool7:
    # F3_s8 → F3_t9 (new body)
    with BuildSketch(Plane.XY):
        with BuildLine():
            ThreePointArc((9.05, -5.9705527382), (8.5724849096, -3.1850150396), (8.492373898, -0.3599799676))
            ThreePointArc((8.492373898, -0.3599799676), (7.7935737214, -3.3926698409), (6.05, -5.9705527382))
            Line((6.05, -5.9705527382), (9.05, -5.9705527382))
        make_face()
    extrude(amount=F3_T9_DEPTH)

    split(bisect_by=Plane.XY.offset(17.5), keep=Keep.BOTTOM)


with BuildPart() as f1_2:
    add(f1_1.part, clean=False)

    # F3_t6: union F3_tool7
    add(f3_tool7.part)

    # F5 (add, through all): a face of the model
    f5_faces = [f1_2.faces().sort_by_distance(p)[0] for p in [
        (0, -8.2595836944, 9),
    ]]
    extrude(f5_faces, amount=F5_DEPTH)

    # F4 (on face) → F6 (cut)
    with BuildSketch(Plane(origin=(0, -5.9705527382, 0), x_dir=(-1, 0, 0), z_dir=(0, 1, 0))):
        with BuildLine():
            ThreePointArc((3.1, 12.5), (2.1920310217, 14.6920310217), (0, 15.6))
            ThreePointArc((0, 15.6), (-2.1920310217, 10.3079689783), (3.1, 12.5))
        make_face()
        with BuildLine():
            ThreePointArc((1.6, 12.5), (-1.1313708499, 11.3686291501), (0, 14.1))
            ThreePointArc((0, 14.1), (1.1313708499, 13.6313708499), (1.6, 12.5))
        make_face(mode=Mode.SUBTRACT)
        with BuildLine():
            ThreePointArc((1.6, 12.5), (1.1313708499, 13.6313708499), (0, 14.1))
            ThreePointArc((0, 14.1), (-1.1313708499, 11.3686291501), (1.6, 12.5))
        make_face()
    extrude(amount=F6_DEPTH, mode=Mode.SUBTRACT)

    # F4 (on face) → F7 (cut)
    with BuildSketch(Plane(origin=(0, -5.9705527382, 0), x_dir=(-1, 0, 0), z_dir=(0, 1, 0))):
        with BuildLine():
            ThreePointArc((3.1, 12.5), (2.1920310217, 14.6920310217), (0, 15.6))
            ThreePointArc((0, 15.6), (-2.1920310217, 10.3079689783), (3.1, 12.5))
        make_face()
        with BuildLine():
            ThreePointArc((1.6, 12.5), (-1.1313708499, 11.3686291501), (0, 14.1))
            ThreePointArc((0, 14.1), (1.1313708499, 13.6313708499), (1.6, 12.5))
        make_face(mode=Mode.SUBTRACT)
    with SkipClean():  # cleaning this boolean's faces spoils the solid; the shape is the same uncleaned
        extrude(amount=-F7_DEPTH, mode=Mode.SUBTRACT)

    # F4 (on face) → F8 (cut)
    with BuildSketch(Plane(origin=(0, -5.9705527382, 0), x_dir=(-1, 0, 0), z_dir=(0, 1, 0))):
        with BuildLine():
            ThreePointArc((1.6, 12.5), (1.1313708499, 13.6313708499), (0, 14.1))
            ThreePointArc((0, 14.1), (-1.1313708499, 11.3686291501), (1.6, 12.5))
        make_face()
    extrude(amount=-F8_DEPTH, mode=Mode.SUBTRACT)

    add(f1_2.part.fix(), mode=Mode.REPLACE)


solid = f1_2.part
